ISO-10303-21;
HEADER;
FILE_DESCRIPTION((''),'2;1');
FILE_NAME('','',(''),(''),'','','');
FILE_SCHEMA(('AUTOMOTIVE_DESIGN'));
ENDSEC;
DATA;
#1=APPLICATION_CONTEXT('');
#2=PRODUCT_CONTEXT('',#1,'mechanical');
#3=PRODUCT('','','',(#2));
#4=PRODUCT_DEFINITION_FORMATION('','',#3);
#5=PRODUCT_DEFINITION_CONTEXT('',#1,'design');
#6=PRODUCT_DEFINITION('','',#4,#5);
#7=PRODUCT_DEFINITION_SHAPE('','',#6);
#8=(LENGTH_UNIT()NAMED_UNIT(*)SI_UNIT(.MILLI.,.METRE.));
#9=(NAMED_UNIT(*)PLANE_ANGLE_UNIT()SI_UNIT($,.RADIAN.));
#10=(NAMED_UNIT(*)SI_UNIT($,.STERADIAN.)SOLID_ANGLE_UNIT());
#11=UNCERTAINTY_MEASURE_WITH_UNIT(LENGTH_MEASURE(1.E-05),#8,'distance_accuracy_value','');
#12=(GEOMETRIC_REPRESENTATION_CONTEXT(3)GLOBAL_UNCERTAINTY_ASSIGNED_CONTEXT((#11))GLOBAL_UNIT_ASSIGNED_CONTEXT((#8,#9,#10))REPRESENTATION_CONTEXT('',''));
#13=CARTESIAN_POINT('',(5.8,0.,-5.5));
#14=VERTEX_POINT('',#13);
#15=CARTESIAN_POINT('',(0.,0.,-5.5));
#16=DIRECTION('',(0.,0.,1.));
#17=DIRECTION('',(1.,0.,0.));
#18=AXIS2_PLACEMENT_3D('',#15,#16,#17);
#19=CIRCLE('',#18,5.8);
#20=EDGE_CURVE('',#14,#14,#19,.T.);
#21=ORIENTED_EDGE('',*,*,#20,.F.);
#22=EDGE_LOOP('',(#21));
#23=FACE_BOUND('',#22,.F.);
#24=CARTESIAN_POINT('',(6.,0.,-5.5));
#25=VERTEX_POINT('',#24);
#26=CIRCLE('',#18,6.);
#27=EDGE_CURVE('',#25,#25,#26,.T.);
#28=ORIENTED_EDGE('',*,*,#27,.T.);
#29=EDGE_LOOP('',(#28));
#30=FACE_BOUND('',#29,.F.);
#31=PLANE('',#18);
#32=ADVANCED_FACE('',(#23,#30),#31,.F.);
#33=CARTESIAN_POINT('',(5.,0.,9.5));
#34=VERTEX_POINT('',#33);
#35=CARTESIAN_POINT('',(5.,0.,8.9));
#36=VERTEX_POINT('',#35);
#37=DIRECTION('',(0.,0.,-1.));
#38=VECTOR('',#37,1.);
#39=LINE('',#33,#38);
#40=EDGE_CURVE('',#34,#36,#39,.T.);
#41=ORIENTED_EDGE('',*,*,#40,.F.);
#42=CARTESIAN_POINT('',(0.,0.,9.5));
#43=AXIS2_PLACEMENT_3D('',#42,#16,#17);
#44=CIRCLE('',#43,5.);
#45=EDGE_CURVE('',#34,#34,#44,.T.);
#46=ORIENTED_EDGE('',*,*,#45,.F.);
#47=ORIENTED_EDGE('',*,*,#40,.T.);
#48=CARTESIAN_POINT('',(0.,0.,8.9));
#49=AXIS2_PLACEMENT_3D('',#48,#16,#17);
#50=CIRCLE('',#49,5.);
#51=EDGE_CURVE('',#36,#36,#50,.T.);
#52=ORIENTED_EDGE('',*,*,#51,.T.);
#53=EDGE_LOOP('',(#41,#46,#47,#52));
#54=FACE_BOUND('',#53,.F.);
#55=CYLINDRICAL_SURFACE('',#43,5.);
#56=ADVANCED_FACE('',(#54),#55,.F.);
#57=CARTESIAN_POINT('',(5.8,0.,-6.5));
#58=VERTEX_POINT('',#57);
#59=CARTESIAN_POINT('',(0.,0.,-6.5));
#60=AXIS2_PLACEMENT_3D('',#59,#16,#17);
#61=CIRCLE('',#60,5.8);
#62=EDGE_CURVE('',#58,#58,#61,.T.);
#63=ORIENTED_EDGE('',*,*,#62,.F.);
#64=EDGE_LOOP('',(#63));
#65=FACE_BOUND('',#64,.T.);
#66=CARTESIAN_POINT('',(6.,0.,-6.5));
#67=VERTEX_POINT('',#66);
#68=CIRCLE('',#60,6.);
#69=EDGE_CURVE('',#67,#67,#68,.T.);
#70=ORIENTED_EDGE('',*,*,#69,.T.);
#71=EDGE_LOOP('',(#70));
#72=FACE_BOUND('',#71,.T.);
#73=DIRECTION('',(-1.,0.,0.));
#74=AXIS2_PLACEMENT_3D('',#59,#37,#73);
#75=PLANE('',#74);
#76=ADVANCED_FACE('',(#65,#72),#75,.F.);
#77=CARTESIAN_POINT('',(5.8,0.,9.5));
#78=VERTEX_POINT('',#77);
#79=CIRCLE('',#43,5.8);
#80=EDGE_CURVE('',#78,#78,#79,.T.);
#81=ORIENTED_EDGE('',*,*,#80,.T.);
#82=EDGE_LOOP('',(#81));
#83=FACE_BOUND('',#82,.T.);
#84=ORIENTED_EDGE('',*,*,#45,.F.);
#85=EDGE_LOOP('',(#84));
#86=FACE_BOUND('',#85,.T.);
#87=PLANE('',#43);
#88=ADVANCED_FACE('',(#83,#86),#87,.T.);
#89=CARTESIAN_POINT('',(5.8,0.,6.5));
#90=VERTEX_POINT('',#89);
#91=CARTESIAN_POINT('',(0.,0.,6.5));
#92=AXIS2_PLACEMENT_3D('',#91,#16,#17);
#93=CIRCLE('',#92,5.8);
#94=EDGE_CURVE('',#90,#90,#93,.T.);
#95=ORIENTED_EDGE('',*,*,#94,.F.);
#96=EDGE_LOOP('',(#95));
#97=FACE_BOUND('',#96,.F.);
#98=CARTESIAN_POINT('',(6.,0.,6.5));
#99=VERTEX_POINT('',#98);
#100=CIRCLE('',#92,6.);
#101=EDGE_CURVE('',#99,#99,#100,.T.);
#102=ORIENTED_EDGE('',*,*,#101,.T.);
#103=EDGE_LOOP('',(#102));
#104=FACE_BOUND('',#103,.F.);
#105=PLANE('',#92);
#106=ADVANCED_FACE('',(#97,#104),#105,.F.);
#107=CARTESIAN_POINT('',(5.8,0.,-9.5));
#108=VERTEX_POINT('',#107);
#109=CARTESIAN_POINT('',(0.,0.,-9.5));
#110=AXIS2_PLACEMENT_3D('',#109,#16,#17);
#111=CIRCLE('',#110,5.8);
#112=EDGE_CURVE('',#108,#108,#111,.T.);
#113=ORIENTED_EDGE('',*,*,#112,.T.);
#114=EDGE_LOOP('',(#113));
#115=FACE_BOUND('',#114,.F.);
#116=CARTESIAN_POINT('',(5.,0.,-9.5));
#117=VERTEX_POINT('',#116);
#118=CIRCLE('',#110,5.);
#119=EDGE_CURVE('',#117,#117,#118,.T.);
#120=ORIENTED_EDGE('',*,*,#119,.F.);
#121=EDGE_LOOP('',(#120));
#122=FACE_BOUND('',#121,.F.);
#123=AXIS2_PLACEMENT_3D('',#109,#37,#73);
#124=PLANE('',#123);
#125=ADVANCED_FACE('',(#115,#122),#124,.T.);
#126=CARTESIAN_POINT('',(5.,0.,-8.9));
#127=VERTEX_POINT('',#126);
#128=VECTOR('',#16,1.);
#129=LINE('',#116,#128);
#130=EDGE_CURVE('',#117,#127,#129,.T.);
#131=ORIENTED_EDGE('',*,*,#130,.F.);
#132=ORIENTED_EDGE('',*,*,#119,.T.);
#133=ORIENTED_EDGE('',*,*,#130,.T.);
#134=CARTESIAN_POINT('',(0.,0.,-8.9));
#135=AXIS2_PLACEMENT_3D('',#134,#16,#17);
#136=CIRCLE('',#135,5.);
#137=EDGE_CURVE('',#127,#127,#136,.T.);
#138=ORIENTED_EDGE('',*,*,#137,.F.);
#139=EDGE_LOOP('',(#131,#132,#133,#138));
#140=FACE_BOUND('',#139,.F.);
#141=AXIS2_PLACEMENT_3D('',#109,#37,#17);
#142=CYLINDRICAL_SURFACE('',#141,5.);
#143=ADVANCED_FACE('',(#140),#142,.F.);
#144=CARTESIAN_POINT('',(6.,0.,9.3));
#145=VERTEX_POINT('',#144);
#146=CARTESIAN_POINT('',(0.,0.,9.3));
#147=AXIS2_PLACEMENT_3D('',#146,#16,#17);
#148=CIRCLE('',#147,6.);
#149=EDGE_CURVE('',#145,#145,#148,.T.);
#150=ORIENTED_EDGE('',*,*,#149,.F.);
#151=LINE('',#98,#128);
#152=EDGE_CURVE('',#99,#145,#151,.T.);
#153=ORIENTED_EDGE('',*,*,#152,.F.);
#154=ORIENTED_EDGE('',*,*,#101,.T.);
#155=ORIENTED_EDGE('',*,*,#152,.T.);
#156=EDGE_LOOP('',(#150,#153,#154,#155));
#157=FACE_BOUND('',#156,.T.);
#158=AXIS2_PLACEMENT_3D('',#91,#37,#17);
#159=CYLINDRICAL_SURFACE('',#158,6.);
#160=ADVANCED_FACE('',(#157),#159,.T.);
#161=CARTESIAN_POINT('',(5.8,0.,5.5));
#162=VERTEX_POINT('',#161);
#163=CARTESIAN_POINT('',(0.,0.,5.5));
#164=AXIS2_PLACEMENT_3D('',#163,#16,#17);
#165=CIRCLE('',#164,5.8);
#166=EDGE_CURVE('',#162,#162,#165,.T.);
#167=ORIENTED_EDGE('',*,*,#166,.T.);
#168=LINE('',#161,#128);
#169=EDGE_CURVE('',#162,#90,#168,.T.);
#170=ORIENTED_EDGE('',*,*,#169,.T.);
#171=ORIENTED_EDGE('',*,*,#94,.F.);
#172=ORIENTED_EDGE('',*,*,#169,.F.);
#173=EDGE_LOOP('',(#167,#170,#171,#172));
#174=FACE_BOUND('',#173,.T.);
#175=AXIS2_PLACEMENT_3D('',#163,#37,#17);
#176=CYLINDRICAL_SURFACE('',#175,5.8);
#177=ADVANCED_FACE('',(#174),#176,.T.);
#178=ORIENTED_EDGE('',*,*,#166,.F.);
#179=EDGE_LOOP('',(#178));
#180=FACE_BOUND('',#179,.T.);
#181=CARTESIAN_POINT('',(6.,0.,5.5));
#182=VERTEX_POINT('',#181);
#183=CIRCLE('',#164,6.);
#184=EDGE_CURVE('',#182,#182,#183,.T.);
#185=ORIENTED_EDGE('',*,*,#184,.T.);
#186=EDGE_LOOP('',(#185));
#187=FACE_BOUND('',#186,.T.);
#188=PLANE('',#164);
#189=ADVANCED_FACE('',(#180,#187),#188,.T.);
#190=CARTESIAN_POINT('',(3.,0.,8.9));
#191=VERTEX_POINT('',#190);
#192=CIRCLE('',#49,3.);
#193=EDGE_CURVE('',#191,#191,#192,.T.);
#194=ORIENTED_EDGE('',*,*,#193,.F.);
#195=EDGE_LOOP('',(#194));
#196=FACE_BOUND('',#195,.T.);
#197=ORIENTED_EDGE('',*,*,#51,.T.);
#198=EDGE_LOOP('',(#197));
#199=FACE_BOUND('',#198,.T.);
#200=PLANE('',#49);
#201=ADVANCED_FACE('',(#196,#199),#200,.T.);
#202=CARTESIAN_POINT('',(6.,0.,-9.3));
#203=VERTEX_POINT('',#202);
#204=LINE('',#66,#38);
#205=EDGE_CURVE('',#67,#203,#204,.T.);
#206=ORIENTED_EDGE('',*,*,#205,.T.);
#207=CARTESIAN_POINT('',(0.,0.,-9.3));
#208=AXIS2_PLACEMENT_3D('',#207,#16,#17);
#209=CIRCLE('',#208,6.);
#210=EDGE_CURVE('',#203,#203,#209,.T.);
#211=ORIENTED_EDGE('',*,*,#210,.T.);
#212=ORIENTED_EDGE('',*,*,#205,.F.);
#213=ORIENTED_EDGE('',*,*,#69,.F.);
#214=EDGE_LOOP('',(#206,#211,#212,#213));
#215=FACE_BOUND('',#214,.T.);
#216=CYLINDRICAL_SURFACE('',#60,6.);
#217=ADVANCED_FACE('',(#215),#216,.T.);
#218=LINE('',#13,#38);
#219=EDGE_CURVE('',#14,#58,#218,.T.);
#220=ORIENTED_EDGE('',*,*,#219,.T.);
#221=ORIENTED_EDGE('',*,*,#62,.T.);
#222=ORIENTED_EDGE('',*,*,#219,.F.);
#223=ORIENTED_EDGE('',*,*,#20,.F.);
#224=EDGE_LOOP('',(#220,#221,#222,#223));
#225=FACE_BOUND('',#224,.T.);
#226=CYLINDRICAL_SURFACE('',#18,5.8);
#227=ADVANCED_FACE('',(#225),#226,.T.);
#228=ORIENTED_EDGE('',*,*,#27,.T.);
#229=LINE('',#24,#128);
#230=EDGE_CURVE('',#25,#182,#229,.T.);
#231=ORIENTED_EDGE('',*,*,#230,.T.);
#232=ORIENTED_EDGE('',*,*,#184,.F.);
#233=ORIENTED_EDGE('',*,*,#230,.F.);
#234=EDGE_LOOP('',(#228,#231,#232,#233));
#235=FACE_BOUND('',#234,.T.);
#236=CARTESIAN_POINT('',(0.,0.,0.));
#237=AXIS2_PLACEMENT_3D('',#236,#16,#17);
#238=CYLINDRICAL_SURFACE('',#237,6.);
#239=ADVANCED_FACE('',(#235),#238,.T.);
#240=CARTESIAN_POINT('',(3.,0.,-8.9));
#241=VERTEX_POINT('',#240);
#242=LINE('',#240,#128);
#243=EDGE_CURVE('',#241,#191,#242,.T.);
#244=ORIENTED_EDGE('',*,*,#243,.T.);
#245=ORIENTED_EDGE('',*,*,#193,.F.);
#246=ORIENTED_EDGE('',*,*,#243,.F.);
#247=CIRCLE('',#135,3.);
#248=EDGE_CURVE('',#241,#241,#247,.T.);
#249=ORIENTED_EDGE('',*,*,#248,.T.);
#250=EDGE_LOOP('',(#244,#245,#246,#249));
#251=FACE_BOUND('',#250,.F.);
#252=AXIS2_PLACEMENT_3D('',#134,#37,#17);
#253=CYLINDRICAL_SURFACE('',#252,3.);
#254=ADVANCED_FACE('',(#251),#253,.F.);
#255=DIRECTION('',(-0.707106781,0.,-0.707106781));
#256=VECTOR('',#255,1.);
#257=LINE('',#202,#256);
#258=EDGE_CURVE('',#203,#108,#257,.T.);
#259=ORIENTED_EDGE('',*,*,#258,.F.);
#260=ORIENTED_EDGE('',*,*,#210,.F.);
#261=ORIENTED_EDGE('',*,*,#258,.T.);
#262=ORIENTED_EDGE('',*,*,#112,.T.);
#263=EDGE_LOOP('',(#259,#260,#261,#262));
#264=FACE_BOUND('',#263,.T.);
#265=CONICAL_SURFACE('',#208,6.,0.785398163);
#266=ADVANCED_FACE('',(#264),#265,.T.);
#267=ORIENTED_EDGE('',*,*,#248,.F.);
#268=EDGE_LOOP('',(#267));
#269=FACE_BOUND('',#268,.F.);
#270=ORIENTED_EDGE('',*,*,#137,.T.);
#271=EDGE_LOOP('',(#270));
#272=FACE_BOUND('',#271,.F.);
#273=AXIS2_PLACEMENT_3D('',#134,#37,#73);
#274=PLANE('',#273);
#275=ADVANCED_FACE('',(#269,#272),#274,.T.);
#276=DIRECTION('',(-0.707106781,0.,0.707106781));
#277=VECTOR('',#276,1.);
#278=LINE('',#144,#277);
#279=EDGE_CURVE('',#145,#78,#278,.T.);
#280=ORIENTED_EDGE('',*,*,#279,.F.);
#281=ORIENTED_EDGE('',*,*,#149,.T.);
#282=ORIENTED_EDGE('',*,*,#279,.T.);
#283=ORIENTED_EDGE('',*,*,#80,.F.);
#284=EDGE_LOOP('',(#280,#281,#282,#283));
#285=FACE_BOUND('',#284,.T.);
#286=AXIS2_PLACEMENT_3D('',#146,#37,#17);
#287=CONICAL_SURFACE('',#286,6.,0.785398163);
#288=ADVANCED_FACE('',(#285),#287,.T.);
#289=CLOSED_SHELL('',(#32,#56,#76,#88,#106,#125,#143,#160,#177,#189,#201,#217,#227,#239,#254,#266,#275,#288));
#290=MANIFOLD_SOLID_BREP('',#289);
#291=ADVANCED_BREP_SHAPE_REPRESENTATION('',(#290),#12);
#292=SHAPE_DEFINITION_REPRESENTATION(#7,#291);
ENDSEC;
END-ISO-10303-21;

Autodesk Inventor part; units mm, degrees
ref_plane "YZ Plane" through (0, 0, 0) normal (1, 0, 0) x (0, 1, 0)
ref_plane "XZ Plane" through (0, 0, 0) normal (0, 1, 0) x (-1, 0, 0)
ref_plane "XY Plane" through (0, 0, 0) normal (0, 0, 1) x (1, 0, 0)
sketch "Эскиз1" plane through (0, 0, 0) normal (0, 0, 1) x (1, 0, 0)
  circle A0 centre (0, 0) radius 6
  dimension "d0" = 12
extrude "Выдавливание1" add sketch "Эскиз1" along normal mid plane 11
sketch "Эскиз2" plane through (0, 0, 5.5) normal (0, 0, 1) x (1, 0, 0)
  circle A0 centre (0, 0) radius 5.8
  dimension "d3" = 11.6
extrude "Выдавливание2" add sketch "Эскиз2" along normal blind 1
sketch "Эскиз3" plane through (0, 0, 6.5) normal (0, 0, 1) x (1, 0, 0)
  circle A0 centre (0, 0) radius 6 projected
extrude "Выдавливание3" add sketch "Эскиз3" along normal blind 3
sketch "Эскиз4" plane through (0, 0, 9.5) normal (0, 0, 1) x (1, 0, 0)
  circle A0 centre (0, 0) radius 5
  dimension "d8" = 10
extrude "Выдавливание4" cut sketch "Эскиз4" against normal blind 0.6
sketch "Эскиз5" plane through (0, 0, 8.9) normal (0, 0, 1) x (1, 0, 0)
  circle A0 centre (0, 0) radius 3
  dimension "d11" = 6
extrude "Выдавливание5" cut sketch "Эскиз5" against normal through all
chamfer "Фаска1" distance 0.2 angle 45 1 edges at (-6, 0, 9.5)
mirror "Зеркальное отражение1" about plane through (0, 0, 0) normal (0, 0, 1) of "Выдавливание3", "Выдавливание4", "Выдавливание5", "Фаска1", "Выдавливание2"
properties part number "LM6UU" material "Сталь, нержавеющая, аустенитная"
